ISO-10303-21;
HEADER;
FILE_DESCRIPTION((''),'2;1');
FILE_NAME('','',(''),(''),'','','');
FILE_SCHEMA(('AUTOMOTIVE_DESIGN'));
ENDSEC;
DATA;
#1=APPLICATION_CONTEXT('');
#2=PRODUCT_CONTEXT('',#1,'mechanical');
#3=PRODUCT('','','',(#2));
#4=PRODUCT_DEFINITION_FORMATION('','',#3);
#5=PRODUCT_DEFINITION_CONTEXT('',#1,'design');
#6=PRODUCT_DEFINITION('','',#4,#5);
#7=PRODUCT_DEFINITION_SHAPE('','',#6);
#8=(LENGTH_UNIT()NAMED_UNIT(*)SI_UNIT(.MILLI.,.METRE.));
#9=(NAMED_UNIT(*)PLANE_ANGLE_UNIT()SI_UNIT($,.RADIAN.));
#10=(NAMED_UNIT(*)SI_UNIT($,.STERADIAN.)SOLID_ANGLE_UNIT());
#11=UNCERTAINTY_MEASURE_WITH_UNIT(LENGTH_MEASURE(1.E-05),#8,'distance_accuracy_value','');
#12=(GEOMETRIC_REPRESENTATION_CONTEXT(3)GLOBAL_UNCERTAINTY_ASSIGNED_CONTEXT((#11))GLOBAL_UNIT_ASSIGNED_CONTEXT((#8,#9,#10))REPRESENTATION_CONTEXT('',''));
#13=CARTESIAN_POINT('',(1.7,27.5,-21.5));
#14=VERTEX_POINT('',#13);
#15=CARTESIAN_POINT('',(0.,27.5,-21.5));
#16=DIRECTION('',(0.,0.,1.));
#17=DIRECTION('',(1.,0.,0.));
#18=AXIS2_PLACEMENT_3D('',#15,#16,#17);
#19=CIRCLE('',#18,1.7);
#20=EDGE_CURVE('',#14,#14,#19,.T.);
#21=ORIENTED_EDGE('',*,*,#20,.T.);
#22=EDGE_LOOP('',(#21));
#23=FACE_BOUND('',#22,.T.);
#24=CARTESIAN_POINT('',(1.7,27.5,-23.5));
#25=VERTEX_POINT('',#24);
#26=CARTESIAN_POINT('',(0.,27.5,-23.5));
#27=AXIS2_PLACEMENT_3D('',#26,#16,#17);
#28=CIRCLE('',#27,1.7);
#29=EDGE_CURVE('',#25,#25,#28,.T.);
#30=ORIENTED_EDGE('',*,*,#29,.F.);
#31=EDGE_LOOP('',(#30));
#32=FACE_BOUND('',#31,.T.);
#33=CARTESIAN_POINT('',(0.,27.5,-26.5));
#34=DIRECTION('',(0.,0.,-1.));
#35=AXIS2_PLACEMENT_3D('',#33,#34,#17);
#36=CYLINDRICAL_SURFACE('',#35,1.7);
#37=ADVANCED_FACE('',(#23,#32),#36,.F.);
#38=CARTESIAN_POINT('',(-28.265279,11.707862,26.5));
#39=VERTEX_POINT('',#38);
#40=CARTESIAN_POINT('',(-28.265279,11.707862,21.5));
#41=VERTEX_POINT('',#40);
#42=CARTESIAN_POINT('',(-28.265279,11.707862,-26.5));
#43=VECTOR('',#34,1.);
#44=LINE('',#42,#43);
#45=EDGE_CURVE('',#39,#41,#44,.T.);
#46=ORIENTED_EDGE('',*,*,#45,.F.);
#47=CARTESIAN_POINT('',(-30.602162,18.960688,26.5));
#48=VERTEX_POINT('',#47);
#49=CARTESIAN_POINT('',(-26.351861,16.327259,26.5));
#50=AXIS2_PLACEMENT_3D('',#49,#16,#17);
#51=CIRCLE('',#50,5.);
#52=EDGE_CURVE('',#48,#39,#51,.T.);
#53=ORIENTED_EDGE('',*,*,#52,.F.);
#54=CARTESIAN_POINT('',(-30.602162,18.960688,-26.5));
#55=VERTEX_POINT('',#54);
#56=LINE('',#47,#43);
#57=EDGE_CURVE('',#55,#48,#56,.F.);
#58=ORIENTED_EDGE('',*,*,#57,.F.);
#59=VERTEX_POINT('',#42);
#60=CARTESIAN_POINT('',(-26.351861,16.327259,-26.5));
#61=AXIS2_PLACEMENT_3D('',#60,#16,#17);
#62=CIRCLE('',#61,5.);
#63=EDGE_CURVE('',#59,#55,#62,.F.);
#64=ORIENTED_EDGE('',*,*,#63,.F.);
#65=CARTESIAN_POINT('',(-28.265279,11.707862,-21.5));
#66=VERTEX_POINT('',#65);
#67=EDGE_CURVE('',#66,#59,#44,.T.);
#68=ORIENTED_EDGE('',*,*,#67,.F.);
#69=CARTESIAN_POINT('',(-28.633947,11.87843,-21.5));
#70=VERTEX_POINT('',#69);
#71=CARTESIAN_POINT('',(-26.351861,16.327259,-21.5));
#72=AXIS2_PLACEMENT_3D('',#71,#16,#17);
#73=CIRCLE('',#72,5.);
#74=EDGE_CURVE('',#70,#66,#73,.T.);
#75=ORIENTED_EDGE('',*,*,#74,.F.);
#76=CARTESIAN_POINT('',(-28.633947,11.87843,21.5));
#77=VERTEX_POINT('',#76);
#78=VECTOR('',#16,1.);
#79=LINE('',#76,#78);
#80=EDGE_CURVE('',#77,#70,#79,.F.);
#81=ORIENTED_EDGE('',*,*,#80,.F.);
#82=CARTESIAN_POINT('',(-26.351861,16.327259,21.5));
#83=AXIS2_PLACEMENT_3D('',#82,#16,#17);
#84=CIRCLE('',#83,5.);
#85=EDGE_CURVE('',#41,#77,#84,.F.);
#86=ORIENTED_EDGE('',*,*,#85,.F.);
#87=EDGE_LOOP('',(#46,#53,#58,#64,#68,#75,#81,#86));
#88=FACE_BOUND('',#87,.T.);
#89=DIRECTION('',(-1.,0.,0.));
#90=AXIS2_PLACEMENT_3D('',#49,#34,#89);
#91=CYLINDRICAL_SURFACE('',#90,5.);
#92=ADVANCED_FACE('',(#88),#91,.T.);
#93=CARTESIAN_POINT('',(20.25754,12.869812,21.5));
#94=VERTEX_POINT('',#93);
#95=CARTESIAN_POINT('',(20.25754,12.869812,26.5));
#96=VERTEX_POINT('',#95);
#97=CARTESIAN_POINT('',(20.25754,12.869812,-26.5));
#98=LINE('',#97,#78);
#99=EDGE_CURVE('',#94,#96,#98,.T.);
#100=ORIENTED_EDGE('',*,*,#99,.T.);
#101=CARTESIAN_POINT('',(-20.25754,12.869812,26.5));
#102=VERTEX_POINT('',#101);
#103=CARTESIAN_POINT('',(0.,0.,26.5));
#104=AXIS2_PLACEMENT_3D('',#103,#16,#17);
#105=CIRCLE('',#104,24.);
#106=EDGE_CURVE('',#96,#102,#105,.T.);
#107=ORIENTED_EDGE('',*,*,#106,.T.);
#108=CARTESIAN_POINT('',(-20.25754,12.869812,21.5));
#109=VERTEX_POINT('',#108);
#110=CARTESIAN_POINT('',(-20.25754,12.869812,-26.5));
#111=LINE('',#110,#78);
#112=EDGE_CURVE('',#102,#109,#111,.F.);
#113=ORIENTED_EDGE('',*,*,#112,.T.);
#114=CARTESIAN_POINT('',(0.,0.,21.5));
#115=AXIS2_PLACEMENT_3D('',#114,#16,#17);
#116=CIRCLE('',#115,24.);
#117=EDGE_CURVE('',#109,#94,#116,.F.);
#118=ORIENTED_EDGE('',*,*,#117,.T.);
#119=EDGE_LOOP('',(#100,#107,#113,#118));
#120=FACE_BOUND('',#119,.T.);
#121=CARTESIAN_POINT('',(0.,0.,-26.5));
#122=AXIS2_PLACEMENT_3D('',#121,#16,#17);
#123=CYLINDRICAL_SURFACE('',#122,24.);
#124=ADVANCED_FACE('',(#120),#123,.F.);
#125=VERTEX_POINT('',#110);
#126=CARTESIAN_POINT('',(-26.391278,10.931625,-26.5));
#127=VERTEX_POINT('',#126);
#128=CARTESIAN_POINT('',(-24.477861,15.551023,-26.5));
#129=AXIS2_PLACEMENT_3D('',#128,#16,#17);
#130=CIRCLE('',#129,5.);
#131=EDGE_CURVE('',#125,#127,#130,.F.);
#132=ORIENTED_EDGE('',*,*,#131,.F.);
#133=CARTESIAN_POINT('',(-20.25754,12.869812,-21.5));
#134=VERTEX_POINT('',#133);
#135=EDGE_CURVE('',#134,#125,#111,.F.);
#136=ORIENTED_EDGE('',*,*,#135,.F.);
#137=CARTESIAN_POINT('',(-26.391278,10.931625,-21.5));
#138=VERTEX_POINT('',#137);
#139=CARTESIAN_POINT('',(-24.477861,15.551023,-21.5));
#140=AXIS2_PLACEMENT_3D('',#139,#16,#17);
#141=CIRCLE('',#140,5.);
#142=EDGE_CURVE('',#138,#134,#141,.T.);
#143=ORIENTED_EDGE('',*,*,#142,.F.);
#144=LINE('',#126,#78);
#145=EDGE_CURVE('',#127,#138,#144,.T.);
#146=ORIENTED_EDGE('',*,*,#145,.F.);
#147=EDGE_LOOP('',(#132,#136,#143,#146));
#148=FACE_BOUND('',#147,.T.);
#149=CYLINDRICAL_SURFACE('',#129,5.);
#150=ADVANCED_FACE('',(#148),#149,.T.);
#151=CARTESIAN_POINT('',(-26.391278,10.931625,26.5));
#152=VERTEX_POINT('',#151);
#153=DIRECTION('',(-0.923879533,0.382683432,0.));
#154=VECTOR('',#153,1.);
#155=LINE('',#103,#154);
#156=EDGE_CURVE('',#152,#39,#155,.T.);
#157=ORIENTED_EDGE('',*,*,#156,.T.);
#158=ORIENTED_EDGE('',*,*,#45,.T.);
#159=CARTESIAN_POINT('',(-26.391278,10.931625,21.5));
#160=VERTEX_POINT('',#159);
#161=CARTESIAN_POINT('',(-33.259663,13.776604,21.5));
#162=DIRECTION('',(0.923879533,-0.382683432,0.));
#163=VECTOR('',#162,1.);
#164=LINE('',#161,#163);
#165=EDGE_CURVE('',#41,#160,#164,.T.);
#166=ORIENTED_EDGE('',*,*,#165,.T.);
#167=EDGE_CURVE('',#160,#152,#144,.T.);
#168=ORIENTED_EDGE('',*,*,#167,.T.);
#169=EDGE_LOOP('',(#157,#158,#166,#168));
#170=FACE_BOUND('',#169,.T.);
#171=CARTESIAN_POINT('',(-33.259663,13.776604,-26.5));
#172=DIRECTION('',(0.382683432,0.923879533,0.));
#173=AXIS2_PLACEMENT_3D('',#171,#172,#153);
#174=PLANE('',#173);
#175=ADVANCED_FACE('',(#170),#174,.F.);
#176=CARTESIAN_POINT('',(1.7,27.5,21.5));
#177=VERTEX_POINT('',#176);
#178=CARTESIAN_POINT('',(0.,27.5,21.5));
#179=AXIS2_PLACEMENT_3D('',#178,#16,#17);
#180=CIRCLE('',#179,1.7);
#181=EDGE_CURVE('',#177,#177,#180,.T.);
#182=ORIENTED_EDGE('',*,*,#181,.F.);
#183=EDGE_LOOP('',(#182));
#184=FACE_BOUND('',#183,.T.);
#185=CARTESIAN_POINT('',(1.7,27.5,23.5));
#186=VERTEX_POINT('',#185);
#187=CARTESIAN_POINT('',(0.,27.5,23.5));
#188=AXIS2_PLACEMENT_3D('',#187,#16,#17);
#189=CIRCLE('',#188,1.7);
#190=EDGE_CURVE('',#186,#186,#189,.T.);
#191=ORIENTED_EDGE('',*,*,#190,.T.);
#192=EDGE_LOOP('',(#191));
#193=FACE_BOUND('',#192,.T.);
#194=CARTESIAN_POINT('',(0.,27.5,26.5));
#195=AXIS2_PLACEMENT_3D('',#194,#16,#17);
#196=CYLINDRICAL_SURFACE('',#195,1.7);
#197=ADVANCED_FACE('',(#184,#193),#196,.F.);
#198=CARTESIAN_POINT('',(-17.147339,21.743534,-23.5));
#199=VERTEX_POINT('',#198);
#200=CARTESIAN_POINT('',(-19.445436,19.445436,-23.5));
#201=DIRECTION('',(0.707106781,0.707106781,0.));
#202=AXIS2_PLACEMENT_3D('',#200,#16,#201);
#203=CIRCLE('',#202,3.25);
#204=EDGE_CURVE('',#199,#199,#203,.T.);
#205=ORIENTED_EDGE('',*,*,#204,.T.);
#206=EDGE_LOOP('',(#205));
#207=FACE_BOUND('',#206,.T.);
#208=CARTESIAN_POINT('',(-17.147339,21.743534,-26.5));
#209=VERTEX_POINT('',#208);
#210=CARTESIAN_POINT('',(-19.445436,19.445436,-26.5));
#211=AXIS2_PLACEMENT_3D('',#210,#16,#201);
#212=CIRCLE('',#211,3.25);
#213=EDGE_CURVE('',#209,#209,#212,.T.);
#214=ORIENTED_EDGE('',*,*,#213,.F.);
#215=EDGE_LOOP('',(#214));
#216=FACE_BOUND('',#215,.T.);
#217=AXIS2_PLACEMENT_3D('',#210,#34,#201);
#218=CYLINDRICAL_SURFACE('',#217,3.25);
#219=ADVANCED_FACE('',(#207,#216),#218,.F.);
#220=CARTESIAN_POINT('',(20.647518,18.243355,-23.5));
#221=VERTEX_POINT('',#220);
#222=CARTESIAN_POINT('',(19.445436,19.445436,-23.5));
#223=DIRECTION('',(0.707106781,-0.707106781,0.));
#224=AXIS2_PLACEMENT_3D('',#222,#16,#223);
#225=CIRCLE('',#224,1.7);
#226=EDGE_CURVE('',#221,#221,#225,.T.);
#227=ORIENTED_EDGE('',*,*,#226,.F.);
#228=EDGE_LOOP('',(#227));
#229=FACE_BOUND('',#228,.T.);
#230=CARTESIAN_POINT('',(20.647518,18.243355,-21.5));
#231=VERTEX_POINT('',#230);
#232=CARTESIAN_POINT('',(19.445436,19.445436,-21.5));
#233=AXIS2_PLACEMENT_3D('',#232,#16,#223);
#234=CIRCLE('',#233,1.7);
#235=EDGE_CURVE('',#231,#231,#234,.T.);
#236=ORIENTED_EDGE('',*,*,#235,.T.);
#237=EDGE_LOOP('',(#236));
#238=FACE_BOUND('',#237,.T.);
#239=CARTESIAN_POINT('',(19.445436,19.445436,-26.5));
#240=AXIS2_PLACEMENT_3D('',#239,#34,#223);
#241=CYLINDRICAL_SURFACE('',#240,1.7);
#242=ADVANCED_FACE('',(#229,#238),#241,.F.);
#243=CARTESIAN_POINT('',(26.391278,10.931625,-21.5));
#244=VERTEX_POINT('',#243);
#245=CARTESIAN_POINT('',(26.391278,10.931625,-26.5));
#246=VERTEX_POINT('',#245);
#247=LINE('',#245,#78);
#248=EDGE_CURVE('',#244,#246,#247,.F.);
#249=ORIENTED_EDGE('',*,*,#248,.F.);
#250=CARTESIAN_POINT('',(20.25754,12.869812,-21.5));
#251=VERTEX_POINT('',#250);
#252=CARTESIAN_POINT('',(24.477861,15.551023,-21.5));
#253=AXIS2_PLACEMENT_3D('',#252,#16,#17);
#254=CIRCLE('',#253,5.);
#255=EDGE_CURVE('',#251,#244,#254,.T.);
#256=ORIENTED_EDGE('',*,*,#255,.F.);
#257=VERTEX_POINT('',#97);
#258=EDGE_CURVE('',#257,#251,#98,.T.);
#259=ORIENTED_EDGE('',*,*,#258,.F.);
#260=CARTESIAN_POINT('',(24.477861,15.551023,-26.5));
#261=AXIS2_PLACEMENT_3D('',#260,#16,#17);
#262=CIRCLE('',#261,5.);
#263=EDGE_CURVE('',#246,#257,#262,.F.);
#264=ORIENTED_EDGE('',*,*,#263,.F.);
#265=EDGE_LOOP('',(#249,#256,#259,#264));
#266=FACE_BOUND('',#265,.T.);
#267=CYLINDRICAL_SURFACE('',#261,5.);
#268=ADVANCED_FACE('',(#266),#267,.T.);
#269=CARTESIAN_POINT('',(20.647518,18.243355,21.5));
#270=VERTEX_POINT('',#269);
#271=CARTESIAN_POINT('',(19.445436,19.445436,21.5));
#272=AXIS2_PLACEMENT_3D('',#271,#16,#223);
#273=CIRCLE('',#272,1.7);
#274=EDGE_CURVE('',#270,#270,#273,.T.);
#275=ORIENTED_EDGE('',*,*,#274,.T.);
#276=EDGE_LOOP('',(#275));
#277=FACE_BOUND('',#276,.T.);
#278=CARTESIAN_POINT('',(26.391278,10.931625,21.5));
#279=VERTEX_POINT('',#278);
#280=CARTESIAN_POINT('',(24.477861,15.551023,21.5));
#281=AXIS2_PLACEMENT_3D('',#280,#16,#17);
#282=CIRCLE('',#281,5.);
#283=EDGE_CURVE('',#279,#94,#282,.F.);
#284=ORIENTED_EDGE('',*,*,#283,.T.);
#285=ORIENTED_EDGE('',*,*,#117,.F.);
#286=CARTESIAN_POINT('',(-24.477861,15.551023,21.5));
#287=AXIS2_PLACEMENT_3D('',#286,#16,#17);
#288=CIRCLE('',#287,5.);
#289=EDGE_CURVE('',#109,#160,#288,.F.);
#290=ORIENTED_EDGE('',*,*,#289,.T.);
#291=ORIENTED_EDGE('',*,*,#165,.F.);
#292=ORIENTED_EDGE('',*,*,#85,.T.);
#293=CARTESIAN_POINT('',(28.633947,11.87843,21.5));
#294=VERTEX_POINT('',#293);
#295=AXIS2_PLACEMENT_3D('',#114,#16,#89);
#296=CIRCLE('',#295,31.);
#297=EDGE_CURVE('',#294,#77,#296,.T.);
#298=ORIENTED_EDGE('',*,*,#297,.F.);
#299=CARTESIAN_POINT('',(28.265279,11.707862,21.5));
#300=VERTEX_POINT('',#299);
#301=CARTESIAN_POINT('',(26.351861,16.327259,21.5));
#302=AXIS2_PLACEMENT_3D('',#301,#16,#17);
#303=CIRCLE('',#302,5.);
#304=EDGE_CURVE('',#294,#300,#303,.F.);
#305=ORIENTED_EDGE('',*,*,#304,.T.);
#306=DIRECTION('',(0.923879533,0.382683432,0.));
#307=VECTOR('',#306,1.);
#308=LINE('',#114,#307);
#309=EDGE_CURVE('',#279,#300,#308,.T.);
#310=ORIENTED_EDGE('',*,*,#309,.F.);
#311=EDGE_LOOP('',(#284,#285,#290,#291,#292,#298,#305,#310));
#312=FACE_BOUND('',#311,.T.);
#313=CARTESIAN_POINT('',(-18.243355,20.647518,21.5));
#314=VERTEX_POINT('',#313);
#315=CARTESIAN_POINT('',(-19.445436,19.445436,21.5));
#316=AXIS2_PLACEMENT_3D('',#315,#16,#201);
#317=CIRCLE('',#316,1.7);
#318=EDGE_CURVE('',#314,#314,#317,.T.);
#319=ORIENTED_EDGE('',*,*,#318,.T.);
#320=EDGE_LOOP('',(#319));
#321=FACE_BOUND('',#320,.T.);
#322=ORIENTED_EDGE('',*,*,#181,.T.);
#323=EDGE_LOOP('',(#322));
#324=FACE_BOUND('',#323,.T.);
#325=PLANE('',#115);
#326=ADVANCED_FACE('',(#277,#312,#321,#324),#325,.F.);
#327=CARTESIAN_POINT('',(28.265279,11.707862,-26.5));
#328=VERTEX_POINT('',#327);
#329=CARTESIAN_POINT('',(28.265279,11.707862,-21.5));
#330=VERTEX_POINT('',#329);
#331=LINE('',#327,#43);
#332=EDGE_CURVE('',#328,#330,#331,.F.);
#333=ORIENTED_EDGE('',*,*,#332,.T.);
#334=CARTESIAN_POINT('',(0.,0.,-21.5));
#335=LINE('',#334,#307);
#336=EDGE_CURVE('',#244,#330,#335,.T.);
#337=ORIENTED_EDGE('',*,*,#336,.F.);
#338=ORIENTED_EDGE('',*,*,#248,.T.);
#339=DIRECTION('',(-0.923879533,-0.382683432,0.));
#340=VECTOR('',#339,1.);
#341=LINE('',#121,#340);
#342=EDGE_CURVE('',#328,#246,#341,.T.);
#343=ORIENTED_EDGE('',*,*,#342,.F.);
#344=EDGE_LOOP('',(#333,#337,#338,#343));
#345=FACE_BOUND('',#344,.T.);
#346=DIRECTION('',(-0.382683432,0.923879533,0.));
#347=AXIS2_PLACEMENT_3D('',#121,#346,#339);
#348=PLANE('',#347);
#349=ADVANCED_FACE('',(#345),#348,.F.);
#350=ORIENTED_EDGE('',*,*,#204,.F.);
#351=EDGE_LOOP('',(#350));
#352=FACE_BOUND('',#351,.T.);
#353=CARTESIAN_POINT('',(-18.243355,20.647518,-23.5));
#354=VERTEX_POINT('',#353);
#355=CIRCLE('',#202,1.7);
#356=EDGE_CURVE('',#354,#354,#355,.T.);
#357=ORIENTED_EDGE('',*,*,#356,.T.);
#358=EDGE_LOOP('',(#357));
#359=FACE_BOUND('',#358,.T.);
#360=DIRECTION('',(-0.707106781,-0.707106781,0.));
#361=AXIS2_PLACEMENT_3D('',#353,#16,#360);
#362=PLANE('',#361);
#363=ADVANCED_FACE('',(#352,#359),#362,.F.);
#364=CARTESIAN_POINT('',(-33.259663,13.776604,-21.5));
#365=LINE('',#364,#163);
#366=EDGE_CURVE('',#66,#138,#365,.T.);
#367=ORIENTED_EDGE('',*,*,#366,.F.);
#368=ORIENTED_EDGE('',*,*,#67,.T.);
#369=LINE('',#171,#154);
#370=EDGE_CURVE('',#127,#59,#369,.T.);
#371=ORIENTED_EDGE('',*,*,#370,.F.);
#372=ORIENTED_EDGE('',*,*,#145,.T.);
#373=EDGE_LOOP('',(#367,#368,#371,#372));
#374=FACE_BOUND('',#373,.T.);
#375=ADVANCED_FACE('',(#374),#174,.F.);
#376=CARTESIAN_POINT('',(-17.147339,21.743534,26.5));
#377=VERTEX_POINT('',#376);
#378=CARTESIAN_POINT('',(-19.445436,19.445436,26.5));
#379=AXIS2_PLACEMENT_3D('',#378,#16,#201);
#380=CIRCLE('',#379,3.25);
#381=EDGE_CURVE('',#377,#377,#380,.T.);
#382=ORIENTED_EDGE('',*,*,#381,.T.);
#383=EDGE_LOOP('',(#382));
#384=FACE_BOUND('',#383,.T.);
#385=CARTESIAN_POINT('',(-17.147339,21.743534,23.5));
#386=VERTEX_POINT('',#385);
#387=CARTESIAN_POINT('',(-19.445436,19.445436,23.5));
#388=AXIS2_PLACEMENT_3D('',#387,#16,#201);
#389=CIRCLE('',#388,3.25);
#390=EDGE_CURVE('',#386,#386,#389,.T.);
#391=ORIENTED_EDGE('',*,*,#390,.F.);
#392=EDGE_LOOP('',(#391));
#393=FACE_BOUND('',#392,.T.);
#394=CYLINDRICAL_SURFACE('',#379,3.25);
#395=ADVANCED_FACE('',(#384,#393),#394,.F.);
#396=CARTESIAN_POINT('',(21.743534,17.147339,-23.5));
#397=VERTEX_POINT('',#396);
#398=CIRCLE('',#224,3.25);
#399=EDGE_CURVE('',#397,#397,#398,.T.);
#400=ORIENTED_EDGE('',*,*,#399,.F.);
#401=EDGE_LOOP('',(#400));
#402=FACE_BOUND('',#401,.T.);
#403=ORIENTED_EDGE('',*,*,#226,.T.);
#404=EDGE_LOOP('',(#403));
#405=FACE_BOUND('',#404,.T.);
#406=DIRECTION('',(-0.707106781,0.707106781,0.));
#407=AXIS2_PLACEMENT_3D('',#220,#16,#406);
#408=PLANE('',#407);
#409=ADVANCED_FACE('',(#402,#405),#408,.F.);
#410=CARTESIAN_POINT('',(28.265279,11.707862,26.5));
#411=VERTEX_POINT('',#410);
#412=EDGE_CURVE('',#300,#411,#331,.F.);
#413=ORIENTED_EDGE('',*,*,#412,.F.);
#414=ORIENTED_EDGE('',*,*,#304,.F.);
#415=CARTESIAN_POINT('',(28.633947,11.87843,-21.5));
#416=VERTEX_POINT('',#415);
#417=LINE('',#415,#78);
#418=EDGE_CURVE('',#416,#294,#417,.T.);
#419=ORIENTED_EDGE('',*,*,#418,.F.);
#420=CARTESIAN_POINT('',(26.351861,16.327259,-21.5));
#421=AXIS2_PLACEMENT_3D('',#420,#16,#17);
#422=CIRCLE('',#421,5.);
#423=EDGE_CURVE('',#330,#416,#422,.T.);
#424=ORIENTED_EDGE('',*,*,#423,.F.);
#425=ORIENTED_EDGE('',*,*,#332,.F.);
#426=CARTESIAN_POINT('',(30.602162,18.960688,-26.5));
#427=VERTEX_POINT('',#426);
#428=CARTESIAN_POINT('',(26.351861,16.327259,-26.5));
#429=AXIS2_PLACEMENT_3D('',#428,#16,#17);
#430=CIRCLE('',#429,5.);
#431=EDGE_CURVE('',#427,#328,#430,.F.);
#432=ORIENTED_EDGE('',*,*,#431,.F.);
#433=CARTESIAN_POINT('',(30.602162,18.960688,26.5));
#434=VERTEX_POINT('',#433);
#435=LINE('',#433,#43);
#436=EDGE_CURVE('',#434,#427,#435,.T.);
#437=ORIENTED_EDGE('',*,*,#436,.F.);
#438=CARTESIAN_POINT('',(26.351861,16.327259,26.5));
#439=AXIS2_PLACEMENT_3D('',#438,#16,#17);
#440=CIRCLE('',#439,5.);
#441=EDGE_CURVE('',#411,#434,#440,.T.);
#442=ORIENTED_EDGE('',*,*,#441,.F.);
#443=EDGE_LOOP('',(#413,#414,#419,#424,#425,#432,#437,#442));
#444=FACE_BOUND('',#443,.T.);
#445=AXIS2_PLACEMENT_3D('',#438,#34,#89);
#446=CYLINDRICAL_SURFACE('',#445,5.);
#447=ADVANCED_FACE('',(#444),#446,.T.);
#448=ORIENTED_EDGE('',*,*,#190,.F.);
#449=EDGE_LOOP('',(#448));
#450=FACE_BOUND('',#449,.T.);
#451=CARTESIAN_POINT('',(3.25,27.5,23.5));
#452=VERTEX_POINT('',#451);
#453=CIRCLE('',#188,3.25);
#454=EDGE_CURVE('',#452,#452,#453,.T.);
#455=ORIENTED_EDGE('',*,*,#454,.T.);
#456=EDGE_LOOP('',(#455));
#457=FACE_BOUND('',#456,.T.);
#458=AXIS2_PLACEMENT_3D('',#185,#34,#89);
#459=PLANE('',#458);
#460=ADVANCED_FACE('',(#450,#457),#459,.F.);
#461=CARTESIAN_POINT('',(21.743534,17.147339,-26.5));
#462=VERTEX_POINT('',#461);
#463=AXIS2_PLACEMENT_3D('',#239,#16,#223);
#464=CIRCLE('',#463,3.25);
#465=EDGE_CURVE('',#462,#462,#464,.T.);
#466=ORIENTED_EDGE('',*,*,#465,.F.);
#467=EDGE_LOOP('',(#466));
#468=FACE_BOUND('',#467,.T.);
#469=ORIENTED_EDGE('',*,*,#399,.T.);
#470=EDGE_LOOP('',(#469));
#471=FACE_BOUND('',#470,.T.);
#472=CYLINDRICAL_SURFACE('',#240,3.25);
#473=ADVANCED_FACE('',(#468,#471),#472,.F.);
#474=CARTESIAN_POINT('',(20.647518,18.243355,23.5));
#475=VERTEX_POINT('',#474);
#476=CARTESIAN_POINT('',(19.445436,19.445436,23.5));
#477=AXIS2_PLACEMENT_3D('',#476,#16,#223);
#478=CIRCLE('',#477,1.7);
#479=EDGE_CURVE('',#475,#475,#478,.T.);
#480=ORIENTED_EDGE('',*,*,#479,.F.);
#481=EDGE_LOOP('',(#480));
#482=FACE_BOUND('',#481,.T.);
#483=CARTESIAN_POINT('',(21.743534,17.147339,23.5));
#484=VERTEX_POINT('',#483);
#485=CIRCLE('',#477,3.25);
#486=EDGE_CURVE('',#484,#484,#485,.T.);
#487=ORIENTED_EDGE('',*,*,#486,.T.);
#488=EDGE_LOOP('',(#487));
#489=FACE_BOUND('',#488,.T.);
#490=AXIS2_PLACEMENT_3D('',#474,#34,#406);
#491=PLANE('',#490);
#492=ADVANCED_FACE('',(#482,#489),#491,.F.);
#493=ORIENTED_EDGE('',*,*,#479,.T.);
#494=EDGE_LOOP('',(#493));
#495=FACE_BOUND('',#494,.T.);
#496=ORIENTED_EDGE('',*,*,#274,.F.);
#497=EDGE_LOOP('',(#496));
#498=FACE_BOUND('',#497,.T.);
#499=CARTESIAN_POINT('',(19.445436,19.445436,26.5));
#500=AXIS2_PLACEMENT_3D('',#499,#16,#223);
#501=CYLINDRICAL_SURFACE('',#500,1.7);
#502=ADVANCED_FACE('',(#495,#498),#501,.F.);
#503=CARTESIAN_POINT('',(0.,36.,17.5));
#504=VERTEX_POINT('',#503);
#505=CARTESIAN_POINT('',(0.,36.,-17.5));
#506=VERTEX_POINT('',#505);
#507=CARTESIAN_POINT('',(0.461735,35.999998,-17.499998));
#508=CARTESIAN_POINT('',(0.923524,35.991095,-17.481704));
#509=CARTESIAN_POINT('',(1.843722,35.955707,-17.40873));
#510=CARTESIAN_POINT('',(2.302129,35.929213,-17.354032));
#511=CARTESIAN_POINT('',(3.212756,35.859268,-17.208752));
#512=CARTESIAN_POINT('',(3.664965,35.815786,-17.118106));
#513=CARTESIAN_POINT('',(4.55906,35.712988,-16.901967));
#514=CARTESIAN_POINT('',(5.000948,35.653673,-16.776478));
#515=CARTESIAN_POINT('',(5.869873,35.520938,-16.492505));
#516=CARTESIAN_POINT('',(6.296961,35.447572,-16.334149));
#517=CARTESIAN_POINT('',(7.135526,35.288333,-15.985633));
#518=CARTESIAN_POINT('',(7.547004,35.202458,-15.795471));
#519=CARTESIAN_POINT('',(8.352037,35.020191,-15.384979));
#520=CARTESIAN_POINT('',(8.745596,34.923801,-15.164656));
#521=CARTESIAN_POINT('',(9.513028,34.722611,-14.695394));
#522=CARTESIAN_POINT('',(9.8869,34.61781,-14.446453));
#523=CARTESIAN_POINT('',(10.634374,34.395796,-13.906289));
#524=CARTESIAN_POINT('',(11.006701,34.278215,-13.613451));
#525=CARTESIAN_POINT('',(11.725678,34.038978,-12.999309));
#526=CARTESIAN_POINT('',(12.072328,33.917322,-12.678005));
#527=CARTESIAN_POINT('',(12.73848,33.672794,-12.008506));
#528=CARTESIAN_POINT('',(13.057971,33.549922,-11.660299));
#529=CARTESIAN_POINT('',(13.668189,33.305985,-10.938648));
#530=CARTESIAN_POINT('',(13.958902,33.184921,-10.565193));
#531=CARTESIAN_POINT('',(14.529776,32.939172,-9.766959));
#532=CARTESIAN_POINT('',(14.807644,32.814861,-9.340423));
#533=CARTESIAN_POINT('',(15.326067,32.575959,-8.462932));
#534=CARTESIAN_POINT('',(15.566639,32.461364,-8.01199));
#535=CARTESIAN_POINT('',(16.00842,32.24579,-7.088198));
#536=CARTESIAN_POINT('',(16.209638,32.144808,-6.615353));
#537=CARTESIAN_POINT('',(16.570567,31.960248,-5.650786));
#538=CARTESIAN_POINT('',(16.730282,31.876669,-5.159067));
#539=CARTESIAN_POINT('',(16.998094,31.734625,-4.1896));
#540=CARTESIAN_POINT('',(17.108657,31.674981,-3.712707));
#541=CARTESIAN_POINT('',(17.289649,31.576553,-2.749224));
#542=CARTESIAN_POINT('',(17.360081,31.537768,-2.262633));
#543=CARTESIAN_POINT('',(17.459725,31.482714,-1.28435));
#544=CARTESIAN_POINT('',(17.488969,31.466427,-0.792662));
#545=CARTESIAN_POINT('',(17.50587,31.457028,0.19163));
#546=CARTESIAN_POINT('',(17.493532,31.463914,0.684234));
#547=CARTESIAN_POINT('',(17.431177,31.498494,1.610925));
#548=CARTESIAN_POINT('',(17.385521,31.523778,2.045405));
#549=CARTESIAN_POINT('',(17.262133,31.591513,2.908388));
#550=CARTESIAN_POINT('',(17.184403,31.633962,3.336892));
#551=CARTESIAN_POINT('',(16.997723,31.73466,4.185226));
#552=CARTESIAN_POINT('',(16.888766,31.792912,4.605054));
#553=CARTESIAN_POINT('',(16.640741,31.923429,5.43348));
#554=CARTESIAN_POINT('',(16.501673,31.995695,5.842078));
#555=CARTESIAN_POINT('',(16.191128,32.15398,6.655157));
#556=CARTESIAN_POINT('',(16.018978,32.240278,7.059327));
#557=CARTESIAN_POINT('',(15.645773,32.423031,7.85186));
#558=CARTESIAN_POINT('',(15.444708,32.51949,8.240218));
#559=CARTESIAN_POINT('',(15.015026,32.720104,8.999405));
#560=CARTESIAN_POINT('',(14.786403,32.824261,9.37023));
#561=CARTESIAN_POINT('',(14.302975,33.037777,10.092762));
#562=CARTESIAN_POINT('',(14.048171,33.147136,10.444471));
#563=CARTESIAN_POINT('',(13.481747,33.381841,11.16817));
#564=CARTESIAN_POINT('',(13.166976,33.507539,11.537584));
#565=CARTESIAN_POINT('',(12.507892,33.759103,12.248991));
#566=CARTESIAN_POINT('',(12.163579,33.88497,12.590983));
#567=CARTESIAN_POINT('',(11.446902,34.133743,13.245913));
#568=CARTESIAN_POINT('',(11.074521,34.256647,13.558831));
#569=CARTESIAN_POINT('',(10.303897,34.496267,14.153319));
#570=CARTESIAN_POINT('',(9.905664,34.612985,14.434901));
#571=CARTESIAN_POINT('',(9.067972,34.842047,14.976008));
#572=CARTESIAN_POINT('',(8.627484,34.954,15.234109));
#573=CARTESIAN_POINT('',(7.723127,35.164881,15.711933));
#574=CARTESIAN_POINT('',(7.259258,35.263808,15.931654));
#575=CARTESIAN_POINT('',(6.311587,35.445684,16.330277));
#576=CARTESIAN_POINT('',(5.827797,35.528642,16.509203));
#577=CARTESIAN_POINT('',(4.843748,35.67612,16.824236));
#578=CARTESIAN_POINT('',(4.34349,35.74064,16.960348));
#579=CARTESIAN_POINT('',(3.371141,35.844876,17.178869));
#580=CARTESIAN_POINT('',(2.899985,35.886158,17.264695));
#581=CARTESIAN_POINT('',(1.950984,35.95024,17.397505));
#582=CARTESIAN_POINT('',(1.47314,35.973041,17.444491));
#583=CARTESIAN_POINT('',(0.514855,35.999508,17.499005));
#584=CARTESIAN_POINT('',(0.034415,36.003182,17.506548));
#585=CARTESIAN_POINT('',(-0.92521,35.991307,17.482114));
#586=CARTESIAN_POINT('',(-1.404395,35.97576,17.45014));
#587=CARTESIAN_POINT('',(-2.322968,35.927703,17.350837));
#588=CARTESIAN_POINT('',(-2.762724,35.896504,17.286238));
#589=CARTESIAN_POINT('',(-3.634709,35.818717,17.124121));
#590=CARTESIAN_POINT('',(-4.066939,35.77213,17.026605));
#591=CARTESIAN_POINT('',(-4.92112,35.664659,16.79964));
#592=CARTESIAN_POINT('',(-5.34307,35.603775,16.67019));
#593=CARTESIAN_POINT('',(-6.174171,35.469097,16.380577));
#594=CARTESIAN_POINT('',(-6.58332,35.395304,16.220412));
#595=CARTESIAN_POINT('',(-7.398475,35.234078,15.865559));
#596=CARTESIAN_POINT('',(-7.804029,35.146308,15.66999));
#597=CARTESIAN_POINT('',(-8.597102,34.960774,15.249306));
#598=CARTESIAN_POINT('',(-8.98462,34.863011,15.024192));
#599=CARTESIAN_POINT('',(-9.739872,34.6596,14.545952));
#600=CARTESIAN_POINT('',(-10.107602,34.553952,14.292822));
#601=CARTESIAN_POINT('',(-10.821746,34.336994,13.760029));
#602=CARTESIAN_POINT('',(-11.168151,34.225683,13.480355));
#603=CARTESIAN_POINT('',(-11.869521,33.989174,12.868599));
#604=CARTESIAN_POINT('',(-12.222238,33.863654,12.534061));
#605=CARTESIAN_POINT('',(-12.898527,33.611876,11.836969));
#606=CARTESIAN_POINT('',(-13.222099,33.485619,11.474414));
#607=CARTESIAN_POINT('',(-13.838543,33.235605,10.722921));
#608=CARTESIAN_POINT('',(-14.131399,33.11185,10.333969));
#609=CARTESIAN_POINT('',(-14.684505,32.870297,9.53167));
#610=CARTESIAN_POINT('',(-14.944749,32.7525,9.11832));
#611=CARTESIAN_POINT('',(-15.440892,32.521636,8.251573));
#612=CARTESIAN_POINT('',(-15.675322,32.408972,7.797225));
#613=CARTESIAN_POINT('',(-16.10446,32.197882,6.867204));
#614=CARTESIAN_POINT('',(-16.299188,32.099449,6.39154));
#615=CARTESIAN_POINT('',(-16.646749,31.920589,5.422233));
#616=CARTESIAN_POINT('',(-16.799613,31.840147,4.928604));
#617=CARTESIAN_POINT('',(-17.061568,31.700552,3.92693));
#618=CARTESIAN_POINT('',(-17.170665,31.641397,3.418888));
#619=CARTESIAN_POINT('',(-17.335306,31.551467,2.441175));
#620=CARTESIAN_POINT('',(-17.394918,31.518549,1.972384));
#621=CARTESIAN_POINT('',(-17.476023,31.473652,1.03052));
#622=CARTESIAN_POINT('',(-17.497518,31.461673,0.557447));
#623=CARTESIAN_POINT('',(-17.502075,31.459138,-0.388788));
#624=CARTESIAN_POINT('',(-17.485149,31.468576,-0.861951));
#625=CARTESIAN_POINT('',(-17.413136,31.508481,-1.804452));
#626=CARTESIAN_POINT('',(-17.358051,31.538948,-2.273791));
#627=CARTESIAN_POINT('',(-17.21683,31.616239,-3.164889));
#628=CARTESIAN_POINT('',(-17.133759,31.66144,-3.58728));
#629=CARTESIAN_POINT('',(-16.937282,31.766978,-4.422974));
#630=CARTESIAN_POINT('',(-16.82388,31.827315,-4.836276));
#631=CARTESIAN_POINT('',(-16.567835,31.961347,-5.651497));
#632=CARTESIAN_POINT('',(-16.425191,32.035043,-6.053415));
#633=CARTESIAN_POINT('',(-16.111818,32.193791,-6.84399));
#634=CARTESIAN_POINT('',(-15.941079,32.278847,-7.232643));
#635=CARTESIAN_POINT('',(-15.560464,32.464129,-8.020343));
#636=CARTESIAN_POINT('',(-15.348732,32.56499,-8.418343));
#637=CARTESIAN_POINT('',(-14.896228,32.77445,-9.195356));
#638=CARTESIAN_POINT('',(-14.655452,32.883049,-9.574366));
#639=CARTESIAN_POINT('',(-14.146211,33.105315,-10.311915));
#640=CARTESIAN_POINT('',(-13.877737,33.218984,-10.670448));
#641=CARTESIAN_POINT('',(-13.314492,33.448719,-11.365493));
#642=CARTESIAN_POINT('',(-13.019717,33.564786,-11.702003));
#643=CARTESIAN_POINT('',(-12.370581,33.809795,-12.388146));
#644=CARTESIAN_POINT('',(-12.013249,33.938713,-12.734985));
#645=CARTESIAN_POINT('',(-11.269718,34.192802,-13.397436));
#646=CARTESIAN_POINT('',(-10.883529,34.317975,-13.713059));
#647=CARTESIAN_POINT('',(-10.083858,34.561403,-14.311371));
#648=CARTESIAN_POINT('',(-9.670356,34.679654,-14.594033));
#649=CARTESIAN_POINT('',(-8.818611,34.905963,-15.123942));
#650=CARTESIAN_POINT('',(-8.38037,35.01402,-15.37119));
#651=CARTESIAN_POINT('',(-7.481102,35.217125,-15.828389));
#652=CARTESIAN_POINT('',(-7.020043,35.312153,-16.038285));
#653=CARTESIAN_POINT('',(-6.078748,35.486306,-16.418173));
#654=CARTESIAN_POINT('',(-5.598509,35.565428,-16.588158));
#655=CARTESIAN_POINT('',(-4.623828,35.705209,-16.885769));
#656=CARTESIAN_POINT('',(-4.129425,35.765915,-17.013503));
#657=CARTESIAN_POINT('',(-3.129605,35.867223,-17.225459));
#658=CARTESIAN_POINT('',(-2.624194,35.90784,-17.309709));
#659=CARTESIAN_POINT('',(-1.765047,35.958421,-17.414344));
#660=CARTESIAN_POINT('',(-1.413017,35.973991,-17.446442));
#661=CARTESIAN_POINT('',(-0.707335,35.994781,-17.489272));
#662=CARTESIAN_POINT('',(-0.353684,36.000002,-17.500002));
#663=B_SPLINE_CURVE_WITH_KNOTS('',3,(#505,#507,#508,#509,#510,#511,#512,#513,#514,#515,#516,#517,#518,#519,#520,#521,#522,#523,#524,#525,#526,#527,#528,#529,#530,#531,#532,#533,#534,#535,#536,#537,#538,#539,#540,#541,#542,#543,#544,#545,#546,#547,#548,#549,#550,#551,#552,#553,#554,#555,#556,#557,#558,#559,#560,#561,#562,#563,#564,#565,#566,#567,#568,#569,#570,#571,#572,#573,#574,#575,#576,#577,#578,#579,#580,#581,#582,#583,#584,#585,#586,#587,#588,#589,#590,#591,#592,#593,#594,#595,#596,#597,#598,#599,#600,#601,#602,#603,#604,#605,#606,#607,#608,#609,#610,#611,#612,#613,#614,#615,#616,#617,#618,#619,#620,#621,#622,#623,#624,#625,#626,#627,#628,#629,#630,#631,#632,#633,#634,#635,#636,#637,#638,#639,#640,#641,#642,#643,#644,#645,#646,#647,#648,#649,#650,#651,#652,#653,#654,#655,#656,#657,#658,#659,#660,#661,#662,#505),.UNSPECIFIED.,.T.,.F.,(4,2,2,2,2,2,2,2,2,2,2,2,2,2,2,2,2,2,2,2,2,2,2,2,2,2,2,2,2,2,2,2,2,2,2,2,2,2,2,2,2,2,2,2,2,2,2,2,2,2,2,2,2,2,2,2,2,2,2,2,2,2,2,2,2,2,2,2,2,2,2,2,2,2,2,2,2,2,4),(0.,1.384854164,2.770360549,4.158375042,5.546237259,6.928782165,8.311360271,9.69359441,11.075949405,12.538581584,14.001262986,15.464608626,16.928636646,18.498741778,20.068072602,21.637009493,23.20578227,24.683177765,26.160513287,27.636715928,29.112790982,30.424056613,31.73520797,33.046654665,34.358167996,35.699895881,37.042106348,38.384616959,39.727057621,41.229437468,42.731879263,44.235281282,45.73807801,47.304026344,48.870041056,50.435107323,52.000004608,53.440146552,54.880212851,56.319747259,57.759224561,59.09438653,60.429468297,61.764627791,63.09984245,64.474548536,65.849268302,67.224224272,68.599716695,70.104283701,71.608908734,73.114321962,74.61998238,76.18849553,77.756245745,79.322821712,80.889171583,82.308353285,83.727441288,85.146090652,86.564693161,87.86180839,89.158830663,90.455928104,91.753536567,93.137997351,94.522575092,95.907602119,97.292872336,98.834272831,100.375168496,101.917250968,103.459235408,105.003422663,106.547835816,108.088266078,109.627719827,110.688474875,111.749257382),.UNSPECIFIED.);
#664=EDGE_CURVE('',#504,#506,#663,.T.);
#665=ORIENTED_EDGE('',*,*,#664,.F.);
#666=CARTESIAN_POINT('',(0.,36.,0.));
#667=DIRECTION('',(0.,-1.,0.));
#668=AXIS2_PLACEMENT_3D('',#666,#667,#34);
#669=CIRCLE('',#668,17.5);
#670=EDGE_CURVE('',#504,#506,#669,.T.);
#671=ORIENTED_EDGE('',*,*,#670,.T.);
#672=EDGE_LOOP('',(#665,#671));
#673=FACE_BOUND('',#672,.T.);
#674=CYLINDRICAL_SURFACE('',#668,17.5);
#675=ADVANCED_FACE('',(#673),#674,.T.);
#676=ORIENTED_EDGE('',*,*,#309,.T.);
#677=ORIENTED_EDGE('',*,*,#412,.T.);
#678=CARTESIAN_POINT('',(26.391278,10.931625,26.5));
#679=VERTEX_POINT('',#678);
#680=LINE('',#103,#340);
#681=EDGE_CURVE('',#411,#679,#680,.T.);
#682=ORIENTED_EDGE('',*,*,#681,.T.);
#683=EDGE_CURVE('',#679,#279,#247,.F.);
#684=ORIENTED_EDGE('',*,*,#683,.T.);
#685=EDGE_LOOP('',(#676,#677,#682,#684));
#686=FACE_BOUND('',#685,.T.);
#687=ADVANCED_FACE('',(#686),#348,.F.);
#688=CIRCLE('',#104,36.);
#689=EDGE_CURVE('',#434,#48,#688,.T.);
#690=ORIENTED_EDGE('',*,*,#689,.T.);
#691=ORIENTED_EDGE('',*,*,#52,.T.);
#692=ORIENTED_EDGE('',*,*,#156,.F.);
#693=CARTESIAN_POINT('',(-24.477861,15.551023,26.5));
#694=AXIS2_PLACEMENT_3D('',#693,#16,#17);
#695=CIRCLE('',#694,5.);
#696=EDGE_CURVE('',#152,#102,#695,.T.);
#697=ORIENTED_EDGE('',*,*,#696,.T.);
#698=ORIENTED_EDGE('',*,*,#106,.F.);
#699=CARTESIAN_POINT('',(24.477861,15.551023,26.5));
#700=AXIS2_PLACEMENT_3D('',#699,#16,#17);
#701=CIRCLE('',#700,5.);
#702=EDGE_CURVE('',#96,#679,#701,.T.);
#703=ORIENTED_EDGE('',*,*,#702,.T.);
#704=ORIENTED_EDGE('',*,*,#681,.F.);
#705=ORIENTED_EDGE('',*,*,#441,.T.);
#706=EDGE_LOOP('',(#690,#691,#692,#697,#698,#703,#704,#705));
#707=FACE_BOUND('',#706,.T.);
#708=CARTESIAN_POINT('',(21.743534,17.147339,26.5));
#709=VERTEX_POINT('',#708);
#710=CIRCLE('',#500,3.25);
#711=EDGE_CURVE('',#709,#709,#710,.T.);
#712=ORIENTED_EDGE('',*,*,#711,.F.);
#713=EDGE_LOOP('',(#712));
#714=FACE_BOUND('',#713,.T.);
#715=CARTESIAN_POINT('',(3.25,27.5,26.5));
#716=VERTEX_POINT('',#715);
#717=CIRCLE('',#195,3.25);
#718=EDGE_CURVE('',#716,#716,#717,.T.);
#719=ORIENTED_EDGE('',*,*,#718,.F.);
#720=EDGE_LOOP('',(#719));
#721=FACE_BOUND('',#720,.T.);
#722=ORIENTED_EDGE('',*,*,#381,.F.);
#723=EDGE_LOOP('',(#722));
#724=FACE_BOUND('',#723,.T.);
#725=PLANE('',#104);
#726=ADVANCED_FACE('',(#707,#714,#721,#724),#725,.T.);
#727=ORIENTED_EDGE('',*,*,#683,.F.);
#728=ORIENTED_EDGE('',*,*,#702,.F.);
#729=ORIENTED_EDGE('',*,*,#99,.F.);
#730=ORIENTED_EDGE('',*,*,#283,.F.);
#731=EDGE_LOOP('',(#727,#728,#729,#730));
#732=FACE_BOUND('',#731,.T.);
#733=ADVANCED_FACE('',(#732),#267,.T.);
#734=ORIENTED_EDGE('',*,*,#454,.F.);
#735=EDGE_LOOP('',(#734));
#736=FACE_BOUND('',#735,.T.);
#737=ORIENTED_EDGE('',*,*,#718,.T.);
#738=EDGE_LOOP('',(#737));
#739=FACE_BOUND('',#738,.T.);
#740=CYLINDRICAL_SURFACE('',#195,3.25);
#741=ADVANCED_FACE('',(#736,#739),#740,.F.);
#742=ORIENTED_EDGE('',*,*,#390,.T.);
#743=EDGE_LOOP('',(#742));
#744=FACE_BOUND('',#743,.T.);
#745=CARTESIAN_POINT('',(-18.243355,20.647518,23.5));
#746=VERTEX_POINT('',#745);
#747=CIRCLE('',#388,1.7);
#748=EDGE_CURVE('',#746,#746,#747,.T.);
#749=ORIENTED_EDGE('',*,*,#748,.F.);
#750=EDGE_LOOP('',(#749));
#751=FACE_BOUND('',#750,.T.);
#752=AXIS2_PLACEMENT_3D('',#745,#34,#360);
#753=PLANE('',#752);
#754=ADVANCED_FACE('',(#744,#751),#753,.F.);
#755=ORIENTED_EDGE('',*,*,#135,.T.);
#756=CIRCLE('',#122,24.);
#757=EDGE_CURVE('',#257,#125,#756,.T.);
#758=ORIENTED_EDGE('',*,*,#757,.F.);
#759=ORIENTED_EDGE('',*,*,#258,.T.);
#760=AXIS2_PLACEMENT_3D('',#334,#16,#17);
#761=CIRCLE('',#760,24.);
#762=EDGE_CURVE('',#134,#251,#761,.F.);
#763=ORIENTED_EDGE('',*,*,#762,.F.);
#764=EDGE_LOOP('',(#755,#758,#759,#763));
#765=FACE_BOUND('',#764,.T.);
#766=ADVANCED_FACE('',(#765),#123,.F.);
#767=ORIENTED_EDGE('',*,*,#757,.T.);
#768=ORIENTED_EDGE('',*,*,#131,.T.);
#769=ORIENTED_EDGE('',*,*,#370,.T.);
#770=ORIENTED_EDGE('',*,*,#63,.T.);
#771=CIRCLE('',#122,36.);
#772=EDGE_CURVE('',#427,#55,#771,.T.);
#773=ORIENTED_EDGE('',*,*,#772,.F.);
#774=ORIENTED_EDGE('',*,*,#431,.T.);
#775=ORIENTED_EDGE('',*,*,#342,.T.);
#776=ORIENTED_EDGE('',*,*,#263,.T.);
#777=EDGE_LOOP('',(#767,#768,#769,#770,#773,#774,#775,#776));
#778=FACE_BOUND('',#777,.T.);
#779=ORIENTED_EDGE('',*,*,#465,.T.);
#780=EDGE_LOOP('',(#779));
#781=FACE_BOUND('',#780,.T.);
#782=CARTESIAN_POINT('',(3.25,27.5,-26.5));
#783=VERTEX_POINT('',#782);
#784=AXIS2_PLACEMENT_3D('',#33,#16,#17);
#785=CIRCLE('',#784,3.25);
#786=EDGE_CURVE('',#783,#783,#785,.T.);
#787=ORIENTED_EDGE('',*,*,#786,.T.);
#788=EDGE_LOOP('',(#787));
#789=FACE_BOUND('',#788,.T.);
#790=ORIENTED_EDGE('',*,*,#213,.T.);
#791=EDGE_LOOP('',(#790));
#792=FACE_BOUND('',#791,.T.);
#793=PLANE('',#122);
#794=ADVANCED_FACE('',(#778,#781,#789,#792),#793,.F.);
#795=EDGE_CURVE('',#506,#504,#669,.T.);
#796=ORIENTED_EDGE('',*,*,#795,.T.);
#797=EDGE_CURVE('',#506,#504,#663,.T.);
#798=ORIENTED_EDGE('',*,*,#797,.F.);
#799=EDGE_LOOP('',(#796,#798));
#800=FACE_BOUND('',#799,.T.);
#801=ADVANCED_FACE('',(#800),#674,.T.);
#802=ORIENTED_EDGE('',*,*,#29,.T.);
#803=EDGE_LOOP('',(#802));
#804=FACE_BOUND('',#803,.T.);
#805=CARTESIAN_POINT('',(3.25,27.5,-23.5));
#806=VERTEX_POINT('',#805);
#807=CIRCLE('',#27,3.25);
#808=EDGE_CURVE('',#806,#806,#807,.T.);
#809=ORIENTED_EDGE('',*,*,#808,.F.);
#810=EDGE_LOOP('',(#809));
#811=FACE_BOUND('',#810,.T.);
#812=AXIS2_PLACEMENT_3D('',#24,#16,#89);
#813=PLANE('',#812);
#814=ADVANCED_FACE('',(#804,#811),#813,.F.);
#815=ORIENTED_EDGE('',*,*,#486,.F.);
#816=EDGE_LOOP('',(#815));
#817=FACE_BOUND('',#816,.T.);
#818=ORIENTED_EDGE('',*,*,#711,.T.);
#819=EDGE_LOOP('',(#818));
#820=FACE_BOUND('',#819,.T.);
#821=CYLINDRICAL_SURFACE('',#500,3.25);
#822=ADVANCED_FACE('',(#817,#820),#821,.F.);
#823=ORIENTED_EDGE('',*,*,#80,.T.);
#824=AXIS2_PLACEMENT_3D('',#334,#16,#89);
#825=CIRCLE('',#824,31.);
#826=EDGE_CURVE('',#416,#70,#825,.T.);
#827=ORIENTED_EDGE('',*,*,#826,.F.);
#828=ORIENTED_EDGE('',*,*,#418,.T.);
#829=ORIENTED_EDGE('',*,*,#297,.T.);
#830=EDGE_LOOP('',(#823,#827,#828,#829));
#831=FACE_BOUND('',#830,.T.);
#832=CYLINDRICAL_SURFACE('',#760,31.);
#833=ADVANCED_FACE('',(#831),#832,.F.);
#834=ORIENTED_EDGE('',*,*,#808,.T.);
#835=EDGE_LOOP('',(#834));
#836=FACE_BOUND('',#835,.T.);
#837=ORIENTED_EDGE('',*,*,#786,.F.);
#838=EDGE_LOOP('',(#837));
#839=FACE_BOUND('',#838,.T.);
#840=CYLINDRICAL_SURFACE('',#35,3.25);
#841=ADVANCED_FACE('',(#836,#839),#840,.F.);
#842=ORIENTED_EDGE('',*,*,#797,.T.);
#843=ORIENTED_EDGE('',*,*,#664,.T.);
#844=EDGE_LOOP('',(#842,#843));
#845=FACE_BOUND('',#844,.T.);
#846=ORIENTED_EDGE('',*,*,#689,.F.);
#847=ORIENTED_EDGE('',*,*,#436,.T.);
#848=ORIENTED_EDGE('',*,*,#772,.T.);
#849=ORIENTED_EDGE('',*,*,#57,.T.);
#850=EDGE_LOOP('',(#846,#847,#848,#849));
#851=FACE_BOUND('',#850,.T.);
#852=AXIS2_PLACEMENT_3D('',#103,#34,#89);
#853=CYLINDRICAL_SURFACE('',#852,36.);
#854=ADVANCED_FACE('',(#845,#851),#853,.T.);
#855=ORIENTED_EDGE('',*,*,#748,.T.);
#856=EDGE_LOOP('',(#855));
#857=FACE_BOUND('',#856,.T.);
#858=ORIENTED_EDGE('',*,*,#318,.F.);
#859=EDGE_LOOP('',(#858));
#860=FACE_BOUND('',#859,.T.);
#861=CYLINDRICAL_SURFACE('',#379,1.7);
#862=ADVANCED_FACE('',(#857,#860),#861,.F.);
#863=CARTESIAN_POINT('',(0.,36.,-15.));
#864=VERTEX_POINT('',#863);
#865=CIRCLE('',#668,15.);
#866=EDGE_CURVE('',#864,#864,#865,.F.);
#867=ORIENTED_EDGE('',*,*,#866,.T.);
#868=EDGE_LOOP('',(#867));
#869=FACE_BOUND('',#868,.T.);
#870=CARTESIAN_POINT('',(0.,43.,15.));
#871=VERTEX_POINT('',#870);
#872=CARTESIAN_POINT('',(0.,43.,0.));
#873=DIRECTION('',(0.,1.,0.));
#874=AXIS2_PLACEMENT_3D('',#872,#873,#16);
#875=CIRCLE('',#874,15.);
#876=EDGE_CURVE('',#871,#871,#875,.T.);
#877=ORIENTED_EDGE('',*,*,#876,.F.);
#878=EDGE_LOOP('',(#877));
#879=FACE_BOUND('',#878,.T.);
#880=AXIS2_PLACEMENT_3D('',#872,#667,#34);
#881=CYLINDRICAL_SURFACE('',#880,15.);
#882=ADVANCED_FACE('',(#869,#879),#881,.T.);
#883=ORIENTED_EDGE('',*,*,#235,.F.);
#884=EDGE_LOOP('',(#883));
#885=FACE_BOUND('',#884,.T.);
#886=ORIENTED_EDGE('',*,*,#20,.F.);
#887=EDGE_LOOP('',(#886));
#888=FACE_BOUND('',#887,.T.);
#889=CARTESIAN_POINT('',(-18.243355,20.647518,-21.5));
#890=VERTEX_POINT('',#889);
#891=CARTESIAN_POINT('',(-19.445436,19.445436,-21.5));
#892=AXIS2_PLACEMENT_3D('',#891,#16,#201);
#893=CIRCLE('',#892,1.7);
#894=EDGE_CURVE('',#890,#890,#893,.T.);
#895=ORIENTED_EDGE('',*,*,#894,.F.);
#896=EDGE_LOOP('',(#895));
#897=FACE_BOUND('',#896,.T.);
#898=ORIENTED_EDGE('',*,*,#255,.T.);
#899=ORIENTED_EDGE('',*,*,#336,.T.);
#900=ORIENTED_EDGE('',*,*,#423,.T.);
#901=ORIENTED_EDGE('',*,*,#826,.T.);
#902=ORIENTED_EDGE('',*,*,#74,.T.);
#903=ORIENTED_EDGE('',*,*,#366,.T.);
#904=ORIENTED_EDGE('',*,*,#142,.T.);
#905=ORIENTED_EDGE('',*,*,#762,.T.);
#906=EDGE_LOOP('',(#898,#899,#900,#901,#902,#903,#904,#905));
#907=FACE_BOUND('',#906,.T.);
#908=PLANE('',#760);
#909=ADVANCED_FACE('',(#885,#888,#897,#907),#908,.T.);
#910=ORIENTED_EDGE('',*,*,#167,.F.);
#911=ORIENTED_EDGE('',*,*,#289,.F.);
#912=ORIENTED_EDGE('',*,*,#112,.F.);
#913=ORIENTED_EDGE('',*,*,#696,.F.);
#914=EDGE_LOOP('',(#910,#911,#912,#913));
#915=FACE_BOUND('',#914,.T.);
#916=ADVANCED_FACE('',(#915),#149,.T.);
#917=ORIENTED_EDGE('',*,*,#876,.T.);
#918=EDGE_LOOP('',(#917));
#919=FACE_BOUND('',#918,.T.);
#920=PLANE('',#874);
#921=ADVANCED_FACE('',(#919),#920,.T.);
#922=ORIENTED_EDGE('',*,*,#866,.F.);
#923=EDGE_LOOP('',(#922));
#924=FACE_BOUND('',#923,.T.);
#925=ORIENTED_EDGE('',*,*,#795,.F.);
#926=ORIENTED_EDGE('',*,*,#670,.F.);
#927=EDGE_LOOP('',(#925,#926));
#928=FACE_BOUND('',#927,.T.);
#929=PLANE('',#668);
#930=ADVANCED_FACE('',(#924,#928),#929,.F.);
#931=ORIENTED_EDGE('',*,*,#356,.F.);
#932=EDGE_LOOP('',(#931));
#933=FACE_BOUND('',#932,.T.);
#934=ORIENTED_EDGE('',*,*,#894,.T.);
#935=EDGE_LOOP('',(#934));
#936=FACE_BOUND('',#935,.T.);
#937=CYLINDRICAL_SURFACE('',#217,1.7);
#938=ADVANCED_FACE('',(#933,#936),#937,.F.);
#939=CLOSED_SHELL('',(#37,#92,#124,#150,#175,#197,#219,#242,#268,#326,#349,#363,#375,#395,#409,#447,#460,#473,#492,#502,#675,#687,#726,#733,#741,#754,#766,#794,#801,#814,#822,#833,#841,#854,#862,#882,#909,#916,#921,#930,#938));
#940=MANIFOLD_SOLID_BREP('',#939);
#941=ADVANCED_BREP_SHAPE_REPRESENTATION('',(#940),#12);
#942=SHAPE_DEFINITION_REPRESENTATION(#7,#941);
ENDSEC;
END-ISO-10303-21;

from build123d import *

# Parameters (mm, degrees)
SKETCH_1_R                   = 36
EXTRUDE_1_DEPTH              = 26.5
CUT_EXTRUDE_3_DEPTH          = 58.395557319
CUT_EXTRUDE_3_DEPTH_BACK     = 58.395557319
SKETCH_5_R                   = 24
CUT_EXTRUDE_4_DEPTH          = 74.491496107
CUT_EXTRUDE_4_DEPTH_BACK     = 74.491496107
CUT_EXTRUDE_2_DEPTH          = 21.5
HOLE_WIZARD_M3_1_D           = 3.4
HOLE_WIZARD_M3_1_DEPTH       = 5
HOLE_WIZARD_M3_1_CBORE_D     = 6.5
HOLE_WIZARD_M3_1_CBORE_DEPTH = 3
PATTERN_CIRCULAR_1_COUNT     = 2
PATTERN_CIRCULAR_1_ANGLE     = 45
F_1_THE_OTHER_WAY_COUNT      = 2
F_1_THE_OTHER_WAY_ANGLE      = 45
MIRROR_1_COPY_1_D            = 3.4
MIRROR_1_COPY_1_DEPTH        = 5
MIRROR_1_COPY_1_CBORE_D      = 6.5
MIRROR_1_COPY_1_CBORE_DEPTH  = 3
MIRROR_1_COPY_2_D            = 3.4
MIRROR_1_COPY_2_DEPTH        = 5
MIRROR_1_COPY_2_CBORE_D      = 6.5
MIRROR_1_COPY_2_CBORE_DEPTH  = 3
FILLET_1_R                   = 5
SKETCH_10_R                  = 17.5
EXTRUDE_2_DEPTH              = 5
SKETCH_17_R                  = 15
EXTRUDE_3_DEPTH              = 7


with BuildPart() as part:
    # ｽｹｯﾁ1 → ﾎﾞｽ - 押し出し1 (new, symmetric)
    with BuildSketch(Plane.XY):
        Circle(SKETCH_1_R)
    extrude(amount=EXTRUDE_1_DEPTH, both=True)

    # ｽｹｯﾁ5 → ｶｯﾄ - 押し出し3 (cut, two sides: drawn at the far end of the back side and taken through both)
    with BuildSketch(Plane.XY.offset(-CUT_EXTRUDE_3_DEPTH_BACK)):
        Circle(SKETCH_5_R)
    extrude(amount=CUT_EXTRUDE_3_DEPTH + CUT_EXTRUDE_3_DEPTH_BACK, mode=Mode.SUBTRACT)

    # ｽｹｯﾁ6 → ｶｯﾄ - 押し出し4 (cut, two sides: drawn at the far end of the back side and taken through both)
    with BuildSketch(Plane.XY.offset(26.5).offset(-CUT_EXTRUDE_4_DEPTH_BACK)):
        with BuildLine():
            Line((-33.25966317, 13.776603565), (0, 0))
            Line((0, 0), (33.25966317, 13.776603565))
            ThreePointArc((33.25966317, 13.776603565), (0, -36), (-33.25966317, 13.776603565))
        make_face()
    extrude(amount=CUT_EXTRUDE_4_DEPTH + CUT_EXTRUDE_4_DEPTH_BACK, mode=Mode.SUBTRACT)

    # ｽｹｯﾁ3 → ｶｯﾄ - 押し出し2 (cut, symmetric)
    with BuildSketch(Plane.XY):
        with BuildLine():
            Line((-33.25966317, 13.776603565), (-28.640265508, 11.863186403))
            ThreePointArc((-28.640265508, 11.863186403), (0, 31), (28.640265508, 11.863186403))
            Line((28.640265508, 11.863186403), (33.25966317, 13.776603565))
            ThreePointArc((33.25966317, 13.776603565), (0, -36), (-33.25966317, 13.776603565))
        make_face()
    extrude(amount=CUT_EXTRUDE_2_DEPTH, both=True, mode=Mode.SUBTRACT)

    # M3 穴付きねじ用座ぐり穴1
    with Locations(Plane.XY.offset(26.5)):
        with Locations((0, 27.5)):
            hole_wizard_m3_1 = CounterBoreHole(HOLE_WIZARD_M3_1_D / 2, HOLE_WIZARD_M3_1_CBORE_D / 2, HOLE_WIZARD_M3_1_CBORE_DEPTH, depth=HOLE_WIZARD_M3_1_DEPTH)

    # 円形ﾊﾟﾀｰﾝ1: M3 穴付きねじ用座ぐり穴1 ×2 about axis
    pattern_circular_1_axis = Axis((0, 0, 26.5), (0, 0, -1))
    for i in range(1, PATTERN_CIRCULAR_1_COUNT):
        add(hole_wizard_m3_1.rotate(pattern_circular_1_axis, i * PATTERN_CIRCULAR_1_ANGLE / (PATTERN_CIRCULAR_1_COUNT - 1)), mode=Mode.SUBTRACT)

    # 1 the other way: M3 穴付きねじ用座ぐり穴1 ×2 about axis
    f_1_the_other_way_axis = Axis((0, 0, 26.5), (0, 0, 1))
    for i in range(1, F_1_THE_OTHER_WAY_COUNT):
        add(hole_wizard_m3_1.rotate(f_1_the_other_way_axis, i * F_1_THE_OTHER_WAY_ANGLE / (F_1_THE_OTHER_WAY_COUNT - 1)), mode=Mode.SUBTRACT)

    # ﾐﾗｰ1: M3 穴付きねじ用座ぐり穴1 across plane
    add(hole_wizard_m3_1.mirror(Plane.XY), mode=Mode.SUBTRACT)

    # ﾐﾗｰ1 copy 1
    with Locations(Plane(origin=(0, 0, -26.5), x_dir=(0.7071067811865462, -0.7071067811865488, 0), z_dir=(0, 0, -1))):
        with Locations((0, -27.5)):
            CounterBoreHole(MIRROR_1_COPY_1_D / 2, MIRROR_1_COPY_1_CBORE_D / 2, MIRROR_1_COPY_1_CBORE_DEPTH, depth=MIRROR_1_COPY_1_DEPTH)

    # ﾐﾗｰ1 copy 2
    with Locations(Plane(origin=(0, 0, -26.5), x_dir=(0.7071067811865462, 0.7071067811865488, 0), z_dir=(0, 0, -1))):
        with Locations((0, -27.5)):
            CounterBoreHole(MIRROR_1_COPY_2_D / 2, MIRROR_1_COPY_2_CBORE_D / 2, MIRROR_1_COPY_2_CBORE_DEPTH, depth=MIRROR_1_COPY_2_DEPTH)

    # ﾌｨﾚｯﾄ1
    # the kernel refuses this fillet: 5 mm, written as the material it takes off along each edge
    with BuildSketch(Plane(origin=(33.25966317, 13.776603565, 41.063878514), x_dir=(-0.4561802532309845, 0.88988739543951, 0), z_dir=(0, 0, -1)), Plane(origin=(-33.25966317, 13.776603565, -41.063878514), x_dir=(0.45618025323098454, 0.88988739543951, 0), z_dir=(0, 0, 1))) as fillet_1_piece_1:
        with BuildLine():
            CenterArc((5.420999225, -4.98360688), FILLET_1_R, 85.359100457, 99.281799087)
            Line((0.437392345, -5.388159061), (0, 0))
            ThreePointArc((0, 0), (2.912775703, 0.118030465), (5.825551406, 0))
        make_face()
    extrude(amount=82.127757029, mode=Mode.SUBTRACT)
    with BuildSketch(Plane(origin=(22.17310878, 9.184402377, -37.914284285), x_dir=(0.9238795325112864, 0.38268343236509056, 0), z_dir=(0, 0, 1)), Plane(origin=(22.17310878, 9.184402377, 10.085715715), x_dir=(0.9238795325112864, 0.38268343236509056, 0), z_dir=(0, 0, 1))) as fillet_1_piece_2:
        with BuildLine():
            CenterArc((4.565713714, 5), FILLET_1_R, 189.928191842, 80.071808158)
            ThreePointArc((-0.35940934, 4.137931034), (-0.090021164, 2.076755181), (0, 0))
            Line((0, 0), (4.565713714, 0))
        make_face()
    extrude(amount=27.828568571, mode=Mode.SUBTRACT)
    with BuildSketch(Plane(origin=(-22.17310878, 9.184402377, -37.914284285), x_dir=(-0.9238795325112864, 0.38268343236509056, 0), z_dir=(0, 0, 1)), Plane(origin=(-22.17310878, 9.184402377, 10.085715715), x_dir=(-0.9238795325112864, 0.38268343236509056, 0), z_dir=(0, 0, 1))) as fillet_1_piece_3:
        with BuildLine():
            CenterArc((4.565713714, -5), FILLET_1_R, 90, 80.071808158)
            ThreePointArc((-0.35940934, -4.137931034), (-0.090021164, -2.076755181), (0, 0))
            Line((0, 0), (4.565713714, 0))
        make_face()
    extrude(amount=27.828568571, mode=Mode.SUBTRACT)

    # ｽｹｯﾁ10 → ﾎﾞｽ - 押し出し2 (add, through all)
    with BuildSketch(Plane(origin=(0, 31, 0), x_dir=(-1, 0, 0), z_dir=(0, -1, 0))):
        Circle(SKETCH_10_R)
    extrude(amount=-EXTRUDE_2_DEPTH)

    # ｽｹｯﾁ17 → ﾎﾞｽ - 押し出し3 (add)
    with BuildSketch(Plane(origin=(0, 36, 0), x_dir=(1, 0, 0), z_dir=(0, 1, 0))):
        with Locations(Location((0, 0, 0), (0, 0, 90))):
            Circle(SKETCH_17_R)
    extrude(amount=EXTRUDE_3_DEPTH)


solid = part.part
